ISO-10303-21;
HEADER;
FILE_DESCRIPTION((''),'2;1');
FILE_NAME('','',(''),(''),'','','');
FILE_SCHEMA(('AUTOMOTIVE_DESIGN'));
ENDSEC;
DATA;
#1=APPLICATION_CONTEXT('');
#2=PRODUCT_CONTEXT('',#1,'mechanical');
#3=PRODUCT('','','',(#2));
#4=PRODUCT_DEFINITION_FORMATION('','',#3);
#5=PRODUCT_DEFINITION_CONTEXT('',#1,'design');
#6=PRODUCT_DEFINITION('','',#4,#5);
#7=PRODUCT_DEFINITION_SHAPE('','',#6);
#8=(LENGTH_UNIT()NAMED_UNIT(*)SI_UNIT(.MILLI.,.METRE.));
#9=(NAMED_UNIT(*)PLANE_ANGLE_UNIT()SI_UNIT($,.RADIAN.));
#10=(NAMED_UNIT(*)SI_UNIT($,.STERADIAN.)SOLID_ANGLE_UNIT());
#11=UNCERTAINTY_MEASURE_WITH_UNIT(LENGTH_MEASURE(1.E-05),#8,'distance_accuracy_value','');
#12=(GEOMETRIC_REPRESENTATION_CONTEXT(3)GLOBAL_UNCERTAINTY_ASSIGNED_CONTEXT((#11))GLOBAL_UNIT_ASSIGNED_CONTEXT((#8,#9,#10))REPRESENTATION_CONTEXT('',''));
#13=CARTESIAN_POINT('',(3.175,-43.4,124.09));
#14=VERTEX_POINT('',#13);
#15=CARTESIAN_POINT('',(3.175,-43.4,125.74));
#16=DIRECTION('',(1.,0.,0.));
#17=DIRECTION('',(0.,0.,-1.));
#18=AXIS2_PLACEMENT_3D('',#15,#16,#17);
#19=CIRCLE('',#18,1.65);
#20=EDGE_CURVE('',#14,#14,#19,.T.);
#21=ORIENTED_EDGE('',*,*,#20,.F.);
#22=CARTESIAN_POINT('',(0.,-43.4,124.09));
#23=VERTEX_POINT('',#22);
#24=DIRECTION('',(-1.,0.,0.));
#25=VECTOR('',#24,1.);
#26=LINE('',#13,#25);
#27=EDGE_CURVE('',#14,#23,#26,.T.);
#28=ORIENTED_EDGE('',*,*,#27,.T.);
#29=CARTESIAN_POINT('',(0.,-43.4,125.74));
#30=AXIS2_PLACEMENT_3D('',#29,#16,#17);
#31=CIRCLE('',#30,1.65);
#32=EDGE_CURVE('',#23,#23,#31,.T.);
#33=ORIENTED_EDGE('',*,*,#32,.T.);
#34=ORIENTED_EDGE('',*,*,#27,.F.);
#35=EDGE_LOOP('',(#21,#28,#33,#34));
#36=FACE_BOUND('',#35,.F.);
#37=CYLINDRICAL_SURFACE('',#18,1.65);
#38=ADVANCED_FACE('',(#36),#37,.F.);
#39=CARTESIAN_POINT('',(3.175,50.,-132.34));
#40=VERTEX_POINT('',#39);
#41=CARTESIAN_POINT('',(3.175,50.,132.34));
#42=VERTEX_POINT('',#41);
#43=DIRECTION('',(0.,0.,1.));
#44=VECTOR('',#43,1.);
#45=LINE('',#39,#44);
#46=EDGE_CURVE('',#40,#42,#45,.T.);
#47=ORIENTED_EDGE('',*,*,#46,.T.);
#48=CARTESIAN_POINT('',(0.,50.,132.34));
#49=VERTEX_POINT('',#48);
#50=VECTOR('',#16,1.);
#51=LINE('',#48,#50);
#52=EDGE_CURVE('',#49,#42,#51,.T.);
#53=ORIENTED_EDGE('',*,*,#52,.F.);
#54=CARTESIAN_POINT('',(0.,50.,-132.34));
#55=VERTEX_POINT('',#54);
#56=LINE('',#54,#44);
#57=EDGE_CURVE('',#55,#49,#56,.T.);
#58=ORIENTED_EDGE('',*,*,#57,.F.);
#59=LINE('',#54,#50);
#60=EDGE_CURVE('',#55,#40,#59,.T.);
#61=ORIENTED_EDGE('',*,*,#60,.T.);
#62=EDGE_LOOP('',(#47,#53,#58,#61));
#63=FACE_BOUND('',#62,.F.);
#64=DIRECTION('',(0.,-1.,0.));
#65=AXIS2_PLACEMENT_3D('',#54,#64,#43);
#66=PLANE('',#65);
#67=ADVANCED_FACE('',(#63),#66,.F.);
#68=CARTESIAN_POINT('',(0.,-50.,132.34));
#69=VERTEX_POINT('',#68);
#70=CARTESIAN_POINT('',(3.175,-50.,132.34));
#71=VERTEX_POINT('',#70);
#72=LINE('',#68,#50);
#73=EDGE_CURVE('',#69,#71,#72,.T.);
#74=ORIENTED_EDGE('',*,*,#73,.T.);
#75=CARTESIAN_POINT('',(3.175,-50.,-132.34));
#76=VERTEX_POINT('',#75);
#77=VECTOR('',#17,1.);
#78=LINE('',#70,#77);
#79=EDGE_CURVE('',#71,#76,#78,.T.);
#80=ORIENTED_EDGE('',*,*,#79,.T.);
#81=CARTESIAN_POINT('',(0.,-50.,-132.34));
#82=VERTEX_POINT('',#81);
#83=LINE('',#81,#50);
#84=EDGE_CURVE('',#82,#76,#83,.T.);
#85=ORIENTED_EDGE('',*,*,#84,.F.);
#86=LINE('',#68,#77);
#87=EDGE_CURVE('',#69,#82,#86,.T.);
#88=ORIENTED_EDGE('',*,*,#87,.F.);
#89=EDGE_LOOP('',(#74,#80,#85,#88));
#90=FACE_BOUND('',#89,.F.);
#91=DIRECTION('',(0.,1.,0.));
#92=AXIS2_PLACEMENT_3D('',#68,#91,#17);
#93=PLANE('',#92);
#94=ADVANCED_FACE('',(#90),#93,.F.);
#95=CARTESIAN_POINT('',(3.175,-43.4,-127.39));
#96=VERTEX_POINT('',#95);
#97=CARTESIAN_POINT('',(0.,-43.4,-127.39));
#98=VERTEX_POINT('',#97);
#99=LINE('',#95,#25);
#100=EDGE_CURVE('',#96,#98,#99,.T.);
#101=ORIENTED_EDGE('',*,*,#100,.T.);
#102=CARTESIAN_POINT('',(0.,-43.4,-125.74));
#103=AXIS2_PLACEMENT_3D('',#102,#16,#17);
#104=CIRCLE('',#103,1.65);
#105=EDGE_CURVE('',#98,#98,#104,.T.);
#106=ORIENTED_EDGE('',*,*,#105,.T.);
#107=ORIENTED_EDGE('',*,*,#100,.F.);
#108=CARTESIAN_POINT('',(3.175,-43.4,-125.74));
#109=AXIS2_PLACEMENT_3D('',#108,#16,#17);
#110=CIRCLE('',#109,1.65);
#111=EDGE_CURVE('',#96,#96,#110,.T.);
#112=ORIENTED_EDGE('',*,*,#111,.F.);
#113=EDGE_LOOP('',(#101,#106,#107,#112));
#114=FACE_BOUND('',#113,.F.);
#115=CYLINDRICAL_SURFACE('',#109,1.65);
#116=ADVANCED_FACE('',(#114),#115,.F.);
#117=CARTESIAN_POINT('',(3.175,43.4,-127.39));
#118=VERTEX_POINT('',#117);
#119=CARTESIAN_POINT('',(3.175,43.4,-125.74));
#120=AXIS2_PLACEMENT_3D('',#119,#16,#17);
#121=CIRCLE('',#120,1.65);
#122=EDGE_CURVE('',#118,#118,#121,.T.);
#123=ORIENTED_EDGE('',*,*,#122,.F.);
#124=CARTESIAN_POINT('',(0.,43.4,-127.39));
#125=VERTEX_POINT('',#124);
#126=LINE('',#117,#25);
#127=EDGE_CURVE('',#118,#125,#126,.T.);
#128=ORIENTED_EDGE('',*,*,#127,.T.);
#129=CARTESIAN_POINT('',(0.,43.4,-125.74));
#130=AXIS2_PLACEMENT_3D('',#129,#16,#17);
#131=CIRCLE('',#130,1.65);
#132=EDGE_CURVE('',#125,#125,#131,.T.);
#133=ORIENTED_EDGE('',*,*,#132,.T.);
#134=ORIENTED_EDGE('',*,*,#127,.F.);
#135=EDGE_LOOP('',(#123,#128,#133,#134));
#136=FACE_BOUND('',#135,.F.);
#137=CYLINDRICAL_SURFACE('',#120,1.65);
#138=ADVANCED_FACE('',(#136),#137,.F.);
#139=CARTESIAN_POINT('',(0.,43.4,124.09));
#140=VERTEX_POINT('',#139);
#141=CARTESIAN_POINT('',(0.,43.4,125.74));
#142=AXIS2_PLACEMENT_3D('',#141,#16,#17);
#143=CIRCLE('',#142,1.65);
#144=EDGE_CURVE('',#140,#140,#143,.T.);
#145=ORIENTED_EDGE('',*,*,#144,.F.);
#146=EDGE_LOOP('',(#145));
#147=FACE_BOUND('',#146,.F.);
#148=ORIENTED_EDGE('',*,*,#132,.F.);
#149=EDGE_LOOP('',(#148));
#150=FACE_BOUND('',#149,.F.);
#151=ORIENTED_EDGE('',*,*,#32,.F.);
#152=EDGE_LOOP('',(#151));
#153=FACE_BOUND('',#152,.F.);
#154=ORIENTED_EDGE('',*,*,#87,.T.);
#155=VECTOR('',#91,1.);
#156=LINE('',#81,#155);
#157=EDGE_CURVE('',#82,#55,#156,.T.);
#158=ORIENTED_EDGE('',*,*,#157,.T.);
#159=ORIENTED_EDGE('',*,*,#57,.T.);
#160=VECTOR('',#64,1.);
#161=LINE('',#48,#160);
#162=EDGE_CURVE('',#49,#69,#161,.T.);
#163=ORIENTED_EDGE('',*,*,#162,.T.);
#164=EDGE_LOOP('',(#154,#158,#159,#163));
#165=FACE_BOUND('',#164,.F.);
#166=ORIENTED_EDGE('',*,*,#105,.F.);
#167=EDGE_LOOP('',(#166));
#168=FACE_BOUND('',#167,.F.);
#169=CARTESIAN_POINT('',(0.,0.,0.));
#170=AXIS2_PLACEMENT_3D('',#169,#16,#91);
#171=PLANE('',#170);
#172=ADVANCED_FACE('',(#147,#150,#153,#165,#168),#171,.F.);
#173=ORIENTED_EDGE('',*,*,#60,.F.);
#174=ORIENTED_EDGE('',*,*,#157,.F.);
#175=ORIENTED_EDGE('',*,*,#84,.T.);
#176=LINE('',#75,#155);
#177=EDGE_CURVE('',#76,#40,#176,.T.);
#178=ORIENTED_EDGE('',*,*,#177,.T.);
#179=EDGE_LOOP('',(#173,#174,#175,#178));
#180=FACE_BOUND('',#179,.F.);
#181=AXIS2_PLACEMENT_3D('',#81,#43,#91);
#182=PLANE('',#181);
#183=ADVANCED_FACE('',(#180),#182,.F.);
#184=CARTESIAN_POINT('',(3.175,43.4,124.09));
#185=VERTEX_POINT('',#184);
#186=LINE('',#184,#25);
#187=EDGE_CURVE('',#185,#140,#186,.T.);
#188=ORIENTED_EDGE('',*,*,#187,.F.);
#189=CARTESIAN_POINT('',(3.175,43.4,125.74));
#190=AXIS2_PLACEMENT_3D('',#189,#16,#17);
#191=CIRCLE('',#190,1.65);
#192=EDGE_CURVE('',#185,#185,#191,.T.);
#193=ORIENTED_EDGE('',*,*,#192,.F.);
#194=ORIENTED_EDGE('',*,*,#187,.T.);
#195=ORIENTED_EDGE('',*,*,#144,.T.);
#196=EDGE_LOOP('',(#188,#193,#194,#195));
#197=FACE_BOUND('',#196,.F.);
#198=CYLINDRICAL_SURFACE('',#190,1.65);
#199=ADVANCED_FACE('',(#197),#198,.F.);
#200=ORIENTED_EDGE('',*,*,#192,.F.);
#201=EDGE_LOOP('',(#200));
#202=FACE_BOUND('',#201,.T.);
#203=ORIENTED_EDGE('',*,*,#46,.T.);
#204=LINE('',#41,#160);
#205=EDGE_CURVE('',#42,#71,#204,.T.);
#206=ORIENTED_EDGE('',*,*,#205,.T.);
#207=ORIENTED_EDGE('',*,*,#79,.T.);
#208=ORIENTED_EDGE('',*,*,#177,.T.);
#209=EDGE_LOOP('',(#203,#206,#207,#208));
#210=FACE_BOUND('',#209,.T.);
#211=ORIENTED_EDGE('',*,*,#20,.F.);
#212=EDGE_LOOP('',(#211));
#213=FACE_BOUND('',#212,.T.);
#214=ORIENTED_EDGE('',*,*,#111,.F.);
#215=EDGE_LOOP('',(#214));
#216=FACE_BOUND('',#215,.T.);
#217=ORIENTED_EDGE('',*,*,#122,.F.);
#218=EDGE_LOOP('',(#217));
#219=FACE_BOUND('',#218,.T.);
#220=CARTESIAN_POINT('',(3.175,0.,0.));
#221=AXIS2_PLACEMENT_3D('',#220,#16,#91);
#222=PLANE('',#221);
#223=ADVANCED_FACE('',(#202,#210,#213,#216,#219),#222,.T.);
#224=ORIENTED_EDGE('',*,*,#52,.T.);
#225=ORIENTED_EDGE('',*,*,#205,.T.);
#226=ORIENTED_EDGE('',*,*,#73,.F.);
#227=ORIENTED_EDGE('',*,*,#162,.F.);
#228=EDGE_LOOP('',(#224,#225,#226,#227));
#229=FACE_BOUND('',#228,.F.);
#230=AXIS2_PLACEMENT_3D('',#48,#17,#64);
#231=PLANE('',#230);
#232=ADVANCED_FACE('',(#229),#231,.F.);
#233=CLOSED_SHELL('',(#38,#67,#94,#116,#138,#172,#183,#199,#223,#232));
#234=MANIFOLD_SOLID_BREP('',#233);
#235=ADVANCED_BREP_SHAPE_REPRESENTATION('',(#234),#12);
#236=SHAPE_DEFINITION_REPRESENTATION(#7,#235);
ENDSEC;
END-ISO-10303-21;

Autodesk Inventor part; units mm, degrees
ref_plane "YZ Plane" through (0, 0, 0) normal (1, 0, 0) x (0, 1, 0)
ref_plane "XZ Plane" through (0, 0, 0) normal (0, 1, 0) x (-1, 0, 0)
ref_plane "XY Plane" through (0, 0, 0) normal (0, 0, 1) x (1, 0, 0)
sketch "Sketch1" plane through (0, 0, 0) normal (1, 0, 0) x (0, 1, 0)
  line L0 (50, 132.34) -> (-50, 132.34)
  line L1 (-50, 132.34) -> (-50, -132.34)
  line L2 (-50, -132.34) -> (50, -132.34)
  line L3 (50, -132.34) -> (50, 132.34)
  line L4 (50, 132.34) -> (-50, -132.34) construction
  line L5 (-50, 132.34) -> (50, -132.34) construction
  point P0 (0, 0)
extrude "Front_Base" add sketch "Sketch1" along normal blind 3.175
sketch "Sketch2" plane through (3.175, 0, 0) normal (1, 0, 0) x (0, 0, -1)
  circle A0 centre (-125.74, 43.4) radius 1.65
  circle A1 centre (125.74, 43.4) radius 1.65
  circle A2 centre (125.74, -43.4) radius 1.65
  circle A3 centre (-125.74, -43.4) radius 1.65
  line L0 (132.34, 50) -> (-132.34, 50) projected
  line L1 (-132.34, 50) -> (-132.34, -50) projected
  line L2 (132.34, -50) -> (132.34, 50) projected
  line L3 (-132.34, -50) -> (132.34, -50) projected
  point P0 (0, 0)
  dimension "d5" = 6.6
  dimension "d6" = 6.6
  dimension "d7" = 6.6
  dimension "d8" = 6.6
extrude "Joint_Holes" cut sketch "Sketch2" along normal through all both and the other way through all contours A0 | A1 | A2 | A3
equation "\"d6\" = d5"
equation "\"d7\" = d5"
equation "\"d8\" = d5"
properties part number "HP-01" material "Wood (Cherry)"
